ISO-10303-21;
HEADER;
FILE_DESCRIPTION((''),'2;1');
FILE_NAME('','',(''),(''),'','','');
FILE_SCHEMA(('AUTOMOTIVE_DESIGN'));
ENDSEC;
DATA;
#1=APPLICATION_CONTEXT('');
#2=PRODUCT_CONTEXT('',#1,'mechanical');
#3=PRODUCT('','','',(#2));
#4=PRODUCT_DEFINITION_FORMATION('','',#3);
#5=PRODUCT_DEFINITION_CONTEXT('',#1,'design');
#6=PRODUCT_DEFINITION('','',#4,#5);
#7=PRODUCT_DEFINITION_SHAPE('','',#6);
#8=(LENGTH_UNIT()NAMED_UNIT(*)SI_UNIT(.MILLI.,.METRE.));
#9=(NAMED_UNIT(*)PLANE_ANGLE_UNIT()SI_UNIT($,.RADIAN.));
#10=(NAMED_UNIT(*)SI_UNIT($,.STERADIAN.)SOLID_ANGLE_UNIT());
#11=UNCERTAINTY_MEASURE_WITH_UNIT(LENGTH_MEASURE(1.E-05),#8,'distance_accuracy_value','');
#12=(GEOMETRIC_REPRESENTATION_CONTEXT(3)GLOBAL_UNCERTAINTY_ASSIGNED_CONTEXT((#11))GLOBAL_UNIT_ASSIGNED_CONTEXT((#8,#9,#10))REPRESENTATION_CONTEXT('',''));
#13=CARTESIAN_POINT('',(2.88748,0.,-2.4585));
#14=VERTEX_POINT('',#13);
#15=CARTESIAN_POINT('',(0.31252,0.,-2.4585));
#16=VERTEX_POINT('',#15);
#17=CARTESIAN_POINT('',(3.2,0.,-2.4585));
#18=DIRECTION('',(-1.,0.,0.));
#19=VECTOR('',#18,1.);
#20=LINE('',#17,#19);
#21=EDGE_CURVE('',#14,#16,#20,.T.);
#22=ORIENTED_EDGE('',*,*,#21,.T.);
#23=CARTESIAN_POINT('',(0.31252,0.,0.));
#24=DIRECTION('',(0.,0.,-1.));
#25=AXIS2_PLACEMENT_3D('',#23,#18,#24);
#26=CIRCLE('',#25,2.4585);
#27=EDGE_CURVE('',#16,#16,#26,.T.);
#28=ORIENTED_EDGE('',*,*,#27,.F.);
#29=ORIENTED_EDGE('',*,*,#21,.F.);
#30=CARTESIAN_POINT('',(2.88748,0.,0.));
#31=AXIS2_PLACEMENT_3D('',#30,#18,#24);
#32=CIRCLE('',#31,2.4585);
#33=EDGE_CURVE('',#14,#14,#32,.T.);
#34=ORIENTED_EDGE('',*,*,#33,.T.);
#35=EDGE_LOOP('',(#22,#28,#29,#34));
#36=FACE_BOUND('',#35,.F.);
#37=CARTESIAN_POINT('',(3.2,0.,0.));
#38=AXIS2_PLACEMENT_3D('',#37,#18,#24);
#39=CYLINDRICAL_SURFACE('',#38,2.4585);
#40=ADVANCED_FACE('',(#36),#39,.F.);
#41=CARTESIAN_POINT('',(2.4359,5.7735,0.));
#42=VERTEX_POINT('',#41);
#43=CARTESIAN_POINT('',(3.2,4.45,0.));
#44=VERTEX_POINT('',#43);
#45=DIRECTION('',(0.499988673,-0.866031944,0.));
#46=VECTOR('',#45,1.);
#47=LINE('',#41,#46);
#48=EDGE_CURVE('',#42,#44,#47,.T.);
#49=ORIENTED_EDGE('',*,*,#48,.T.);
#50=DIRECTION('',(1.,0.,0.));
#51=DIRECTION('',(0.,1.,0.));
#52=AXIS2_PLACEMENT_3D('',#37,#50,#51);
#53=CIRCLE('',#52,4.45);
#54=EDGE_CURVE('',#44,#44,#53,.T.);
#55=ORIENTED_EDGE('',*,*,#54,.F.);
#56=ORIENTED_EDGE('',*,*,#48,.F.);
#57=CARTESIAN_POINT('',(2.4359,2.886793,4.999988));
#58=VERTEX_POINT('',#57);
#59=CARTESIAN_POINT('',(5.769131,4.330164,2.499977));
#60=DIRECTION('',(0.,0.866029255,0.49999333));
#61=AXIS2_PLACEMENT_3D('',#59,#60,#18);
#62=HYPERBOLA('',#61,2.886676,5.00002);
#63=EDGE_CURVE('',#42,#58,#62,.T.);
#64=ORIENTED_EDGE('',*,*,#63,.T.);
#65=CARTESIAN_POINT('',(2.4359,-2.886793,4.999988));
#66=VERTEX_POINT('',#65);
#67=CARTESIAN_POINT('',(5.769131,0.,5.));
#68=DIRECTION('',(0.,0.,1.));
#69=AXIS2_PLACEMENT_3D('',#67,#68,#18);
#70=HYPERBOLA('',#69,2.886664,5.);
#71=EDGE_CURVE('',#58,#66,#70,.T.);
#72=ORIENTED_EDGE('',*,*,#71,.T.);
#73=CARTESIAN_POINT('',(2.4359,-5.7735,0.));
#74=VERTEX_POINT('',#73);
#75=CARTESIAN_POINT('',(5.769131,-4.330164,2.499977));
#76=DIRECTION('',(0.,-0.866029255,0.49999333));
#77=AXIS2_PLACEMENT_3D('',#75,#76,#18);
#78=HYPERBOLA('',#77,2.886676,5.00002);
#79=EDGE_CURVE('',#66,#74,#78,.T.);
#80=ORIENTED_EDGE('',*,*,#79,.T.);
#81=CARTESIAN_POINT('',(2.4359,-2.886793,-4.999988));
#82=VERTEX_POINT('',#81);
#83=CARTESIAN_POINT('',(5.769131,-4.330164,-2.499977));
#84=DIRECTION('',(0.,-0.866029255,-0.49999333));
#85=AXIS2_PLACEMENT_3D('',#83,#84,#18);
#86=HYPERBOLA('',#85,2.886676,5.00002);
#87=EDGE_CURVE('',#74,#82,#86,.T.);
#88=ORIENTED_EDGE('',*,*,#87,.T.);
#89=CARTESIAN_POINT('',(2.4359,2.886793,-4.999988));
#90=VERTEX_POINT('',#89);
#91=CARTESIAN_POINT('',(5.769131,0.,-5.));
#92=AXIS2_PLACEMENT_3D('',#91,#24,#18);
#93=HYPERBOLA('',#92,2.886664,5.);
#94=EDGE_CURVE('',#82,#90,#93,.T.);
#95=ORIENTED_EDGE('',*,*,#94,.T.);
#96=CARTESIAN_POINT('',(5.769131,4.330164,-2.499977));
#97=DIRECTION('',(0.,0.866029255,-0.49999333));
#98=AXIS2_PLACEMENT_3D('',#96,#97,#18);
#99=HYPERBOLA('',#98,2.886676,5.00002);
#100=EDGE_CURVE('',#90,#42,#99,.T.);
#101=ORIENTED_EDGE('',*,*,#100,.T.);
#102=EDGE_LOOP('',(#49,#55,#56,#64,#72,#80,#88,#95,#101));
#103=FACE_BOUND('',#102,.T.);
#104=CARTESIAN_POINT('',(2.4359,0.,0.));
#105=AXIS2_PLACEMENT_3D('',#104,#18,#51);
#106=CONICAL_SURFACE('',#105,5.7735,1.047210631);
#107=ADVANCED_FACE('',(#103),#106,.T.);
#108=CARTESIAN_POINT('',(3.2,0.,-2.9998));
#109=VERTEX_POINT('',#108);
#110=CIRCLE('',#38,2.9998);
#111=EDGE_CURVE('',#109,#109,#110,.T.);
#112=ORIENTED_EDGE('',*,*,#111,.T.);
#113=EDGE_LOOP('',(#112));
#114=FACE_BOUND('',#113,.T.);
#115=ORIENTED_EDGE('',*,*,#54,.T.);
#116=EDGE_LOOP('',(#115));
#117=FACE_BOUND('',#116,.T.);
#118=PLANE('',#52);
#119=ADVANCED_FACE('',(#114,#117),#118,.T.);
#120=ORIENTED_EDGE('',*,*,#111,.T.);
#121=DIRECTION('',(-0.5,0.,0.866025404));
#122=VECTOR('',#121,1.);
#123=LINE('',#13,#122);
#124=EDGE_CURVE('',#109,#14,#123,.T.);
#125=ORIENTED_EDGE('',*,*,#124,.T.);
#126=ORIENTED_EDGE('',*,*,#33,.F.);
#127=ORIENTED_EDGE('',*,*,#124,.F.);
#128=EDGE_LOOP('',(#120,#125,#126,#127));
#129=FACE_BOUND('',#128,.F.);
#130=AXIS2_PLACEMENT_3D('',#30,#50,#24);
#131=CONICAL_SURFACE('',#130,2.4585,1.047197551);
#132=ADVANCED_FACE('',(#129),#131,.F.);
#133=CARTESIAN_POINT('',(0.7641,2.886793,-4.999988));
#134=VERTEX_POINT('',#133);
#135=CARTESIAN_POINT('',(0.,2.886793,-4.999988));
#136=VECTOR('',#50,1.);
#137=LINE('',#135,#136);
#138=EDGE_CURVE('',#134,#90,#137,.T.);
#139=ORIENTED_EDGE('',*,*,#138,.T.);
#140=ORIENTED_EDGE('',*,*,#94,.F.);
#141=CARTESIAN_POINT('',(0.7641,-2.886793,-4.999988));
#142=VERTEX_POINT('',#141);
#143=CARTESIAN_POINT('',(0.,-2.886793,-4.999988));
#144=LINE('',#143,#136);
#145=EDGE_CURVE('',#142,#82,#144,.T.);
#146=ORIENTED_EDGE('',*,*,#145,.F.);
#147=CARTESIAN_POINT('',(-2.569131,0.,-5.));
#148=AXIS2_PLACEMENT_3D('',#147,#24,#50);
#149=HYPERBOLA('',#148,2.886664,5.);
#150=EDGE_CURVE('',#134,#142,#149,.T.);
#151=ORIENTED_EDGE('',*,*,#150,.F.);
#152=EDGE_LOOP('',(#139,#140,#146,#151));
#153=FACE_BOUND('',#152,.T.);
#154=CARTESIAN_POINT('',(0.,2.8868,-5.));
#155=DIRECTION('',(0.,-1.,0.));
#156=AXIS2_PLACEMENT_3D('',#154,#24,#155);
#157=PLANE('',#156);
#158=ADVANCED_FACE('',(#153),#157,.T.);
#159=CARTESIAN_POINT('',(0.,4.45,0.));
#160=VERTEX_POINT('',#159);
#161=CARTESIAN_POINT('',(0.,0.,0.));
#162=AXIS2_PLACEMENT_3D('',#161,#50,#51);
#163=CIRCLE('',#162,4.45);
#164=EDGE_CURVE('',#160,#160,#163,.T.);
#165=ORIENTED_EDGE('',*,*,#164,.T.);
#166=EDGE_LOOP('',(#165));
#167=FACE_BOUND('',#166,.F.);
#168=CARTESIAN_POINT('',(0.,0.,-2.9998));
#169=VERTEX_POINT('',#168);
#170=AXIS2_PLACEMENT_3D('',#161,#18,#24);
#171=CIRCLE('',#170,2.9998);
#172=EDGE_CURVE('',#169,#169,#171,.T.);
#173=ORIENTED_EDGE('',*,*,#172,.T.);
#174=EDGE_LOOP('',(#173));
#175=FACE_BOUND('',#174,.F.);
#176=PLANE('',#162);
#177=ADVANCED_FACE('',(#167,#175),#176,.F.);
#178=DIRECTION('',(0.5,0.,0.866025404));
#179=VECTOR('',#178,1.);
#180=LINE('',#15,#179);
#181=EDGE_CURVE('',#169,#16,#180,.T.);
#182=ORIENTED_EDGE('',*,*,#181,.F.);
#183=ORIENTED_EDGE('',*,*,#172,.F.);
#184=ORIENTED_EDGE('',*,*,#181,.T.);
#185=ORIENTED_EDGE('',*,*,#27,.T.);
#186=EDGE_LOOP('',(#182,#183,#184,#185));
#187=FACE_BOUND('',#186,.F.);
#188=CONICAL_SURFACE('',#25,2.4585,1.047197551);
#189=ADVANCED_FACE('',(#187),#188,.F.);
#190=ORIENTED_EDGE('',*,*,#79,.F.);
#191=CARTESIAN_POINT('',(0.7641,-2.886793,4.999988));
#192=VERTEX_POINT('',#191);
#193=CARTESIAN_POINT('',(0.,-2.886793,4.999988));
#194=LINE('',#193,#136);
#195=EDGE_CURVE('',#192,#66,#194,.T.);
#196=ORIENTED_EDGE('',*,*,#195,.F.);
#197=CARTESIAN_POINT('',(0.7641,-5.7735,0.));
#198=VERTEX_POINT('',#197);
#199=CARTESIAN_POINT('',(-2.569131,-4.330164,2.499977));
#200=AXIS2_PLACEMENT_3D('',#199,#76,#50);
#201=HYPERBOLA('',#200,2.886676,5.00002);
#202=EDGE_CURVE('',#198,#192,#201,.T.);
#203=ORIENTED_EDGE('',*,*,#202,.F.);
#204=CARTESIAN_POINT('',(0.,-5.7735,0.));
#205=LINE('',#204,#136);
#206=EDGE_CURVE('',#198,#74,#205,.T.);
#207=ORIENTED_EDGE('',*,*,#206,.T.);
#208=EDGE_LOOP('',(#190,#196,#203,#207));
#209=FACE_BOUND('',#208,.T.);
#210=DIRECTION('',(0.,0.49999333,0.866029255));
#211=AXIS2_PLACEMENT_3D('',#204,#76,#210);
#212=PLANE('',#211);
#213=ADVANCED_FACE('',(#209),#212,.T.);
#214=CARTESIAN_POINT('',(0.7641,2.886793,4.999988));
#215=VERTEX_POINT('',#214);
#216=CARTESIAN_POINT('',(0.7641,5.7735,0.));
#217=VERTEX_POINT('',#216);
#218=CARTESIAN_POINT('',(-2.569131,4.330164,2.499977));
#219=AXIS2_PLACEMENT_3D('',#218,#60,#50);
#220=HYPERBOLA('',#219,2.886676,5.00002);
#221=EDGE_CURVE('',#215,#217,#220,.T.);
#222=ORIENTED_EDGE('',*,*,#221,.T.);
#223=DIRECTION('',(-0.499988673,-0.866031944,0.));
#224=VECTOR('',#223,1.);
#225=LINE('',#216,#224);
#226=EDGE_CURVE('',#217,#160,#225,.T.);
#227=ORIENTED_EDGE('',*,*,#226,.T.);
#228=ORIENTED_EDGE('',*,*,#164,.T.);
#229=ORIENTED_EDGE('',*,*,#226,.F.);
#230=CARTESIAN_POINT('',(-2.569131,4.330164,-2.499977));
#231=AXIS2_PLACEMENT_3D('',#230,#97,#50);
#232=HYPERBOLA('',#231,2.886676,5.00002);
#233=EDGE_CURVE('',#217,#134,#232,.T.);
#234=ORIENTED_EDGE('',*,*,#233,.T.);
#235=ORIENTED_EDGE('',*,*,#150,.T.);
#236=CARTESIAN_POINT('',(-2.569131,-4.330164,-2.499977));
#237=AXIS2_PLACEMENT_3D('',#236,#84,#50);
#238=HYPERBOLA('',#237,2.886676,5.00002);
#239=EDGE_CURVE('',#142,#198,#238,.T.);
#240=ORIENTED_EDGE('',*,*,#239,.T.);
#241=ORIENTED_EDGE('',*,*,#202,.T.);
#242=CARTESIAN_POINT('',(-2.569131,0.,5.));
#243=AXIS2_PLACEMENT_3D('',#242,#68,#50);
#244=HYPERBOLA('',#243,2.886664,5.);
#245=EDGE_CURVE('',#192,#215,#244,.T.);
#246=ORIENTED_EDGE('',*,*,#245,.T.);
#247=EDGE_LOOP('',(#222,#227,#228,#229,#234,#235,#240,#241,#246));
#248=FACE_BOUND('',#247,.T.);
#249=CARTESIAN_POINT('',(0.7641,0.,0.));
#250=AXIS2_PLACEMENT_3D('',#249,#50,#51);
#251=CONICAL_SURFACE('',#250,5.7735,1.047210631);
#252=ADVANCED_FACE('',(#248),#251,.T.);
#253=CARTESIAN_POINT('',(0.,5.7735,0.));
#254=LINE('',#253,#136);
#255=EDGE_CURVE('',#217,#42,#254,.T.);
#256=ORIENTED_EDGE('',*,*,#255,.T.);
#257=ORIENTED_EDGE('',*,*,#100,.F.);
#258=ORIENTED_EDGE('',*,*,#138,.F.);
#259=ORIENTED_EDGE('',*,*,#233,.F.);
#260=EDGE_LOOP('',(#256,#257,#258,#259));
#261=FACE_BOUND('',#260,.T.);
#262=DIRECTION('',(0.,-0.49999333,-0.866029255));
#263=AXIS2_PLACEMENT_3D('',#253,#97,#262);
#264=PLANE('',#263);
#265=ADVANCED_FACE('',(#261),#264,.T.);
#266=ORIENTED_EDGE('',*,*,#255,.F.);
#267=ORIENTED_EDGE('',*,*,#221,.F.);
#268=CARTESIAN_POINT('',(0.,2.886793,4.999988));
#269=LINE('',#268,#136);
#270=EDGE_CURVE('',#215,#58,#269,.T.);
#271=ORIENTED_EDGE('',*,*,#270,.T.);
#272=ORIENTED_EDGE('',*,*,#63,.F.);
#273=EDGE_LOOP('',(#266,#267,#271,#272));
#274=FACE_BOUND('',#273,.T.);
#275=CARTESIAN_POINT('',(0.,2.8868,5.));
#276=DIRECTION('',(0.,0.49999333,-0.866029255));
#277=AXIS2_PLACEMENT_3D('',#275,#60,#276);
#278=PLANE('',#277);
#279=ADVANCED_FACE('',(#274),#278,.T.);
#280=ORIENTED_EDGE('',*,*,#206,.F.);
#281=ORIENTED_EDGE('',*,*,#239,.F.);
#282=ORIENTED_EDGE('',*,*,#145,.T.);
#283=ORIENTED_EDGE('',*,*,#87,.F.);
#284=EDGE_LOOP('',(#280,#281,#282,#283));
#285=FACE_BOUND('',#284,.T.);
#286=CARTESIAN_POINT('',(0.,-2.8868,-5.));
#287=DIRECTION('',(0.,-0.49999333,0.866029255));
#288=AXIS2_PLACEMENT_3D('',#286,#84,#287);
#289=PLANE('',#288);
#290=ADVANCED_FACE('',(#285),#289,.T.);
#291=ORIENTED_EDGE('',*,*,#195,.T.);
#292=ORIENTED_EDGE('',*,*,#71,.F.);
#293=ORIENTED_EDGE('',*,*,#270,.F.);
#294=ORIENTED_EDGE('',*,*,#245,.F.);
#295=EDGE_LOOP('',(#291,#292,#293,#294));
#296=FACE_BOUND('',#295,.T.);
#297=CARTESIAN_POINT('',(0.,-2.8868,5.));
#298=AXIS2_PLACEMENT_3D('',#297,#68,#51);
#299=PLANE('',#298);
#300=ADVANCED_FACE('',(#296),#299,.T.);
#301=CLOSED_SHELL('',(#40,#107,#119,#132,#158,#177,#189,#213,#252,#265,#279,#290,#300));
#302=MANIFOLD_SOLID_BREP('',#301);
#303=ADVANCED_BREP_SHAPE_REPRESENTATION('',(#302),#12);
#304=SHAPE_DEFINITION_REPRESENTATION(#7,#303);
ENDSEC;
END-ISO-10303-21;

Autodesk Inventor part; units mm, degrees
ref_plane "YZ Plane" through (0, 0, 0) normal (1, 0, 0) x (0, 1, 0)
ref_plane "XZ Plane" through (0, 0, 0) normal (0, 1, 0) x (-1, 0, 0)
sketch "Sketch1" plane through (0, 0, 0) normal (1, 0, 0) x (0, 1, 0)
  line L0 (-5.7735, 0) -> (-2.8868, 5)
  line L1 (-2.8868, 5) -> (2.8868, 5)
  line L2 (2.8868, 5) -> (5.7735, 0)
  line L3 (5.7735, 0) -> (2.8868, -5)
  line L4 (2.8868, -5) -> (-2.8868, -5)
  line L5 (-2.8868, -5) -> (-5.7735, 0)
  point P0 (0, 0)
  point P1 (0, 0)
  dimension "d0" = 11.547
extrude "Body" add sketch "Sketch1" along normal blind 3.2
sketch "Sketch2" plane through (0, 0, 0) normal (0, 0, 1) x (1, 0, 0)
  line L0 (0, 2.8868) -> (0, 5.7735) projected
  line L1 (0, 5.7735) -> (3.2, 5.7735) projected
  line L2 (3.2, 2.8868) -> (3.2, 5.7735) projected
  line L3 (-0.64, 0) -> (3.84, 0) projected
  line L4 (0.7641, 5.7735) -> (0, 4.45)
  line L5 (2.4359, 5.7735) -> (3.2, 4.45)
  dimension "d3" = 30
  dimension "d4" = 30
  dimension "d5" = 8.9
  dimension "d6" = 8.9
revolve "Chamfer1" cut sketch "Sketch2" angle 360 about axis through (-10, 0, 0) along (1, 0, 0)
sketch "Sketch3" plane through (3.2, 0, 0) normal (1, 0, 0) x (0, 0, -1)
  arc A0 (-0.625, -1.0825) -> (0.625, -1.0825) centre (0, 0) ccw projected
hole "Thread" at (3.2, 0, 0) direction (-1, 0, 0) diameter 4.917 end through all thread size "M6x1" class "6H" standard "ISO Metric profile"
chamfer "Chamfer2" distance 0.5413 angle 30 1 edges at (3.2, 0, 2.4585) measured on face at (3.2, 3.7371, -0.4538)
chamfer "Chamfer3" distance 0.5413 angle 30 1 edges at (0, 0, 2.4585) measured on face at (0, 3.7371, -0.4538)
ref_plane "Work Plane1" through (-12.4358, 0, 0) normal (0, -0.8660254, -0.5) x (1, 0, 0)
equation "\"d0\" = 1.1547 * SW"
equation "\"d1\" = KOH"
equation "\"d3\" = ANG1"
equation "\"d4\" = ANG2"
equation "\"d5\" = SW0"
equation "\"d6\" = SW01"
equation "\"d8\" = -0.5 * GD1 + 0.5 * NND"
equation "\"d40\" = -0.5 * GD1 + 0.5 * NND"
equation "\"d10\" = -0.5 * GD1 + 0.5 * NND"
equation "\"d41\" = -0.5 * GD1 + 0.5 * NND"
equation "\"ANG1\" = 30deg"
equation "\"ANG2\" = 30deg"
equation "\"NND\" = 6"
equation "\"KOH\" = 3.2"
equation "\"SW0\" = 8.9"
equation "\"SW01\" = SW0"
equation "\"GUL\" = 0.541266 * PTC"
equation "\"THREADDIA\" = 6"
equation "\"TOA\" = 30deg"
equation "\"PTC\" = 1"
equation "\"E0\" = 1.155 * SW"
equation "\"GAL\" = 0.541266 * PTC"
equation "\"SW\" = 10"
equation "\"GD1\" = 4.917468"
properties part number "ISO 4035 - M6" material "Stainless Steel, 440C"
